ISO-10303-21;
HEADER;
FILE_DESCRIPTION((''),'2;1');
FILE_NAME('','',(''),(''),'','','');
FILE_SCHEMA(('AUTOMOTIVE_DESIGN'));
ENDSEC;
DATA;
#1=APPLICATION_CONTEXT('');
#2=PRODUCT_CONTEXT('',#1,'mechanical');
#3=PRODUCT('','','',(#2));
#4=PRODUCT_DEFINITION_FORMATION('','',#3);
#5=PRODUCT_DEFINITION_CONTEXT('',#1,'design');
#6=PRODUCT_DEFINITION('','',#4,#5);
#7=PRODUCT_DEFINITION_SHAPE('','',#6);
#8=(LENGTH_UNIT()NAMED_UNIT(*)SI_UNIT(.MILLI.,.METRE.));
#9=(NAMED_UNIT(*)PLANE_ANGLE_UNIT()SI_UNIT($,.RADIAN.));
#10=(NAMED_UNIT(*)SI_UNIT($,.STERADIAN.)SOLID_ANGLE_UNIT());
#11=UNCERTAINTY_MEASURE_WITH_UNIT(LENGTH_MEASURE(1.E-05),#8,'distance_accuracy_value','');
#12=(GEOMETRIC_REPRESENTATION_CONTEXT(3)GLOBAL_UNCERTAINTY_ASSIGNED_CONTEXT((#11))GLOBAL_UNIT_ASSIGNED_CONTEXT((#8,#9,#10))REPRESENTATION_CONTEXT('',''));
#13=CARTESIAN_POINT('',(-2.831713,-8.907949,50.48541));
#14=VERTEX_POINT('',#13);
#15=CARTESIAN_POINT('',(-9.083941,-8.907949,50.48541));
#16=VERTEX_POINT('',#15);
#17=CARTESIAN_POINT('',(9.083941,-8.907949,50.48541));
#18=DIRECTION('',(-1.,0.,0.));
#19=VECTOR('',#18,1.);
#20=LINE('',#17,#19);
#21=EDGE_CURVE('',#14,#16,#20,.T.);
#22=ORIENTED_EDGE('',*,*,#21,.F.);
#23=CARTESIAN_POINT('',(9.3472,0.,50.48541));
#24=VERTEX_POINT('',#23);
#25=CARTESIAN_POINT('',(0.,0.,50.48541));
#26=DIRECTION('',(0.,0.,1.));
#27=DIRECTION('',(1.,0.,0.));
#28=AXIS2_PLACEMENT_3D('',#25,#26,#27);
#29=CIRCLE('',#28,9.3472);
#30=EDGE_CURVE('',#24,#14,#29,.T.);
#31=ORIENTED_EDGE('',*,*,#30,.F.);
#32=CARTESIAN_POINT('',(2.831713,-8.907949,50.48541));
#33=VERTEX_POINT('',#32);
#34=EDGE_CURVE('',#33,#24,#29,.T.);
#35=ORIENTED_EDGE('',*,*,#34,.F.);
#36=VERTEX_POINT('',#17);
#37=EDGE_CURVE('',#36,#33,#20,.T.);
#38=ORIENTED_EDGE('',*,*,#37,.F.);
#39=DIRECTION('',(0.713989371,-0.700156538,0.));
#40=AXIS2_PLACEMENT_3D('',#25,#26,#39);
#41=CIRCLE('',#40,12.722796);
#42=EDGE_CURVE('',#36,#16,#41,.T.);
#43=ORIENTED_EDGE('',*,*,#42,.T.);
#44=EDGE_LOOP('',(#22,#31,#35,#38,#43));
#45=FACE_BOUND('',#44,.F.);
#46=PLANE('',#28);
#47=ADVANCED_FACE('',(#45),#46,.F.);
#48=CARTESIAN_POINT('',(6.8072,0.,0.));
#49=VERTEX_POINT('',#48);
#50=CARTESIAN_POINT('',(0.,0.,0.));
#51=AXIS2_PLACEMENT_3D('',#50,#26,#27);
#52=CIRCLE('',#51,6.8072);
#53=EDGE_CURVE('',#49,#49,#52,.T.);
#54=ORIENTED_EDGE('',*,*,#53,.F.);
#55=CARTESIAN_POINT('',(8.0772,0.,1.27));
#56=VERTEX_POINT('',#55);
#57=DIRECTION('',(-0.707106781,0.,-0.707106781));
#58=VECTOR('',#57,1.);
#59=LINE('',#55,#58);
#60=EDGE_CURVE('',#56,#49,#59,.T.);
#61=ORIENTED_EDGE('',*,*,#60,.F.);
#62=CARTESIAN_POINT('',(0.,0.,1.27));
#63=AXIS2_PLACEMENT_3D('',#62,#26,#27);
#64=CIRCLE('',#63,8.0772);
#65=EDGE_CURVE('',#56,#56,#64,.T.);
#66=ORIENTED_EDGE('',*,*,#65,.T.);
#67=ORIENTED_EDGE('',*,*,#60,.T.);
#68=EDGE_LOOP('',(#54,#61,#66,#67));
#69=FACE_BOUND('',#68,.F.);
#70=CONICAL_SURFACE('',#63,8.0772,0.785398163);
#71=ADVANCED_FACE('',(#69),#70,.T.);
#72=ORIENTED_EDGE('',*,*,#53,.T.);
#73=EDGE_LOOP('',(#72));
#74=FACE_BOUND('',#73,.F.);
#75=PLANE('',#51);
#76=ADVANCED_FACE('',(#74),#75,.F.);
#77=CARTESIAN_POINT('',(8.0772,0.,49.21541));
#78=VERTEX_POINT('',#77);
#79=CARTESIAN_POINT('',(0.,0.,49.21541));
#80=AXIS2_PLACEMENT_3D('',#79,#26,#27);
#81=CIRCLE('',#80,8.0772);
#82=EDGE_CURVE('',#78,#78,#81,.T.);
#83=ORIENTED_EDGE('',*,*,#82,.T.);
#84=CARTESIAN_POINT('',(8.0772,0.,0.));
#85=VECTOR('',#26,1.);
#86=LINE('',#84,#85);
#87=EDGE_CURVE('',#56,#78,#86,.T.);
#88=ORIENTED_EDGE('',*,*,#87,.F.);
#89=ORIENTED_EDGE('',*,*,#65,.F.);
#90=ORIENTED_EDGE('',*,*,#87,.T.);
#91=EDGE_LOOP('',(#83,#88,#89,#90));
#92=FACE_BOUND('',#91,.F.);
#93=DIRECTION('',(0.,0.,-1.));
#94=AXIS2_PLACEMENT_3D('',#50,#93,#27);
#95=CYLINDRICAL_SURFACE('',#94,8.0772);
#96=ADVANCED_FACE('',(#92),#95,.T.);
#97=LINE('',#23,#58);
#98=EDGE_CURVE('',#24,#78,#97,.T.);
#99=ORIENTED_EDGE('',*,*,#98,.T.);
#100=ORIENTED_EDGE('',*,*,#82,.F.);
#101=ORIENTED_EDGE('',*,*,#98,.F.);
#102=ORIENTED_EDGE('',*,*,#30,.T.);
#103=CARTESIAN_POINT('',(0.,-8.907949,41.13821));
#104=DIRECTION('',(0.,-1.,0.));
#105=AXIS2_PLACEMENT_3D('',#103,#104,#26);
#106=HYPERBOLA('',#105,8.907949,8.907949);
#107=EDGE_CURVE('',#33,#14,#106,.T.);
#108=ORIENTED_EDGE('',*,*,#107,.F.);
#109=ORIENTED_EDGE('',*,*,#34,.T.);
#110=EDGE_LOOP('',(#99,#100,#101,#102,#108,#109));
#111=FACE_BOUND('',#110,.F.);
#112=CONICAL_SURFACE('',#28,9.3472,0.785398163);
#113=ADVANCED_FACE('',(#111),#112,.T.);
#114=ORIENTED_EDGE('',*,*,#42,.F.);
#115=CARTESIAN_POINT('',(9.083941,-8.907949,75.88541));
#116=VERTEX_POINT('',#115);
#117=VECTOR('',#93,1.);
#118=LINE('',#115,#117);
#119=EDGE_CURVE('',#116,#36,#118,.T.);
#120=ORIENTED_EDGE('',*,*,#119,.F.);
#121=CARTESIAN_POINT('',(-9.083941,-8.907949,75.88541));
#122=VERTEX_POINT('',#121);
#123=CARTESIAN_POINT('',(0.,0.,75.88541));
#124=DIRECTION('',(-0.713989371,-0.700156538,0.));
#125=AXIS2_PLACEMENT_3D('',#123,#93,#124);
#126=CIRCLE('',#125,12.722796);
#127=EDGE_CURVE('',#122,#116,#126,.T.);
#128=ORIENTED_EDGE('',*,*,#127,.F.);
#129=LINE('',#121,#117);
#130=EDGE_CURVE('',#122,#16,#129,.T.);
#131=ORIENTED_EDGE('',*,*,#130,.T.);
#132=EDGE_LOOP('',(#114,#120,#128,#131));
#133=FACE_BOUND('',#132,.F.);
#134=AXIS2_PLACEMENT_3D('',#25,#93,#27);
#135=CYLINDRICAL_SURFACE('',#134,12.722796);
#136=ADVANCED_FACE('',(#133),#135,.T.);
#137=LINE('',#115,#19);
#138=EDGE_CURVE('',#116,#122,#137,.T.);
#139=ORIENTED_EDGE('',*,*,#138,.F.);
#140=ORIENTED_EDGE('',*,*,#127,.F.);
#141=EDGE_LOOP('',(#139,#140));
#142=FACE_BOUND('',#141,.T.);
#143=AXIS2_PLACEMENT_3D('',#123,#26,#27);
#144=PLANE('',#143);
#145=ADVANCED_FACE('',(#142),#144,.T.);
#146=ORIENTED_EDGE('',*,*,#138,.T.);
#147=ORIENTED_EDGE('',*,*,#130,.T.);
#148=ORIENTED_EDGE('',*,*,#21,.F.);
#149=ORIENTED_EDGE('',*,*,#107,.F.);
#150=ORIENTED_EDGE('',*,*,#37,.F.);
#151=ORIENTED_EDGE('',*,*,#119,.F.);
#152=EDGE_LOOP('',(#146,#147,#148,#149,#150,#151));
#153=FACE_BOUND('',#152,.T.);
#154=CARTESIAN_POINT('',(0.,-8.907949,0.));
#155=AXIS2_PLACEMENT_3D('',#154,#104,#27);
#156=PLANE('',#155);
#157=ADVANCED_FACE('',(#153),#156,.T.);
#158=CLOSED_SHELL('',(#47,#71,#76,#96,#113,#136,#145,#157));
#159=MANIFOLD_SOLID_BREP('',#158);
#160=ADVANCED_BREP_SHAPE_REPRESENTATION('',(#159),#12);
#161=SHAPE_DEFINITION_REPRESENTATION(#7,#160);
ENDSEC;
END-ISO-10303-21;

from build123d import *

# Parameters (mm, degrees)
F0_R     = 8.0772
F1_DEPTH = 50.48541
F2_R     = 12.7227956512
F3_DEPTH = 25.4
F5_DEPTH = 25.4


# Not quite as in the source:
# - a fillet or chamfer that OpenCascade refuses, or shapes differently, is made with other operations: its cross-section is extruded or revolved along the edge and cut away or added


with BuildPart() as f1:
    # F0 (on Top) → F1 (new body)
    with BuildSketch(Plane.XY):
        Circle(F0_R)
    extrude(amount=F1_DEPTH)

    # F2 (on face) → F3 (join)
    with BuildSketch(Plane.XY.offset(50.48541)):
        Circle(F2_R)
    extrude(amount=F3_DEPTH)

    # F4 (on face) → F5 (cut)
    with BuildSketch(Plane.XY.offset(75.88541)):
        with BuildLine():
            Line((9.0839408688, -8.9079485558), (-9.0839408688, -8.9079485558))
            ThreePointArc((-9.0839408688, -8.9079485558), (0, -12.7227956512), (9.0839408688, -8.9079485558))
        make_face()
    extrude(amount=-F5_DEPTH, mode=Mode.SUBTRACT)

    # F6: chamfer of 1.27 on 2 edges, made by hand


with BuildPart() as f6_tool2:
    # F6_s3 → F6_t4 (revolve)
    with BuildSketch(Plane.XZ):
        Polygon((9.3472, 50.48541), (8.0772, 49.21541), (8.0772, 50.48541), align=None)
    revolve(axis=Axis((0, 0, 50.48541), (0, 0, 1)))

    split(bisect_by=Plane.XZ.offset(8.9079485558), keep=Keep.BOTTOM)


with BuildPart() as f1_1:
    add(f1.part)

    # F6_t1: union F6_tool2
    add(f6_tool2.part)

    # F6_s6 → F6_t7 (revolve, cut)
    with BuildSketch(Plane.XZ):
        Polygon((8.0772, 1.27), (6.8072, 0), (8.0772, 0), align=None)
    revolve(axis=Axis((0, 0, 0), (0, 0, 1)), mode=Mode.SUBTRACT)


solid = f1_1.part
